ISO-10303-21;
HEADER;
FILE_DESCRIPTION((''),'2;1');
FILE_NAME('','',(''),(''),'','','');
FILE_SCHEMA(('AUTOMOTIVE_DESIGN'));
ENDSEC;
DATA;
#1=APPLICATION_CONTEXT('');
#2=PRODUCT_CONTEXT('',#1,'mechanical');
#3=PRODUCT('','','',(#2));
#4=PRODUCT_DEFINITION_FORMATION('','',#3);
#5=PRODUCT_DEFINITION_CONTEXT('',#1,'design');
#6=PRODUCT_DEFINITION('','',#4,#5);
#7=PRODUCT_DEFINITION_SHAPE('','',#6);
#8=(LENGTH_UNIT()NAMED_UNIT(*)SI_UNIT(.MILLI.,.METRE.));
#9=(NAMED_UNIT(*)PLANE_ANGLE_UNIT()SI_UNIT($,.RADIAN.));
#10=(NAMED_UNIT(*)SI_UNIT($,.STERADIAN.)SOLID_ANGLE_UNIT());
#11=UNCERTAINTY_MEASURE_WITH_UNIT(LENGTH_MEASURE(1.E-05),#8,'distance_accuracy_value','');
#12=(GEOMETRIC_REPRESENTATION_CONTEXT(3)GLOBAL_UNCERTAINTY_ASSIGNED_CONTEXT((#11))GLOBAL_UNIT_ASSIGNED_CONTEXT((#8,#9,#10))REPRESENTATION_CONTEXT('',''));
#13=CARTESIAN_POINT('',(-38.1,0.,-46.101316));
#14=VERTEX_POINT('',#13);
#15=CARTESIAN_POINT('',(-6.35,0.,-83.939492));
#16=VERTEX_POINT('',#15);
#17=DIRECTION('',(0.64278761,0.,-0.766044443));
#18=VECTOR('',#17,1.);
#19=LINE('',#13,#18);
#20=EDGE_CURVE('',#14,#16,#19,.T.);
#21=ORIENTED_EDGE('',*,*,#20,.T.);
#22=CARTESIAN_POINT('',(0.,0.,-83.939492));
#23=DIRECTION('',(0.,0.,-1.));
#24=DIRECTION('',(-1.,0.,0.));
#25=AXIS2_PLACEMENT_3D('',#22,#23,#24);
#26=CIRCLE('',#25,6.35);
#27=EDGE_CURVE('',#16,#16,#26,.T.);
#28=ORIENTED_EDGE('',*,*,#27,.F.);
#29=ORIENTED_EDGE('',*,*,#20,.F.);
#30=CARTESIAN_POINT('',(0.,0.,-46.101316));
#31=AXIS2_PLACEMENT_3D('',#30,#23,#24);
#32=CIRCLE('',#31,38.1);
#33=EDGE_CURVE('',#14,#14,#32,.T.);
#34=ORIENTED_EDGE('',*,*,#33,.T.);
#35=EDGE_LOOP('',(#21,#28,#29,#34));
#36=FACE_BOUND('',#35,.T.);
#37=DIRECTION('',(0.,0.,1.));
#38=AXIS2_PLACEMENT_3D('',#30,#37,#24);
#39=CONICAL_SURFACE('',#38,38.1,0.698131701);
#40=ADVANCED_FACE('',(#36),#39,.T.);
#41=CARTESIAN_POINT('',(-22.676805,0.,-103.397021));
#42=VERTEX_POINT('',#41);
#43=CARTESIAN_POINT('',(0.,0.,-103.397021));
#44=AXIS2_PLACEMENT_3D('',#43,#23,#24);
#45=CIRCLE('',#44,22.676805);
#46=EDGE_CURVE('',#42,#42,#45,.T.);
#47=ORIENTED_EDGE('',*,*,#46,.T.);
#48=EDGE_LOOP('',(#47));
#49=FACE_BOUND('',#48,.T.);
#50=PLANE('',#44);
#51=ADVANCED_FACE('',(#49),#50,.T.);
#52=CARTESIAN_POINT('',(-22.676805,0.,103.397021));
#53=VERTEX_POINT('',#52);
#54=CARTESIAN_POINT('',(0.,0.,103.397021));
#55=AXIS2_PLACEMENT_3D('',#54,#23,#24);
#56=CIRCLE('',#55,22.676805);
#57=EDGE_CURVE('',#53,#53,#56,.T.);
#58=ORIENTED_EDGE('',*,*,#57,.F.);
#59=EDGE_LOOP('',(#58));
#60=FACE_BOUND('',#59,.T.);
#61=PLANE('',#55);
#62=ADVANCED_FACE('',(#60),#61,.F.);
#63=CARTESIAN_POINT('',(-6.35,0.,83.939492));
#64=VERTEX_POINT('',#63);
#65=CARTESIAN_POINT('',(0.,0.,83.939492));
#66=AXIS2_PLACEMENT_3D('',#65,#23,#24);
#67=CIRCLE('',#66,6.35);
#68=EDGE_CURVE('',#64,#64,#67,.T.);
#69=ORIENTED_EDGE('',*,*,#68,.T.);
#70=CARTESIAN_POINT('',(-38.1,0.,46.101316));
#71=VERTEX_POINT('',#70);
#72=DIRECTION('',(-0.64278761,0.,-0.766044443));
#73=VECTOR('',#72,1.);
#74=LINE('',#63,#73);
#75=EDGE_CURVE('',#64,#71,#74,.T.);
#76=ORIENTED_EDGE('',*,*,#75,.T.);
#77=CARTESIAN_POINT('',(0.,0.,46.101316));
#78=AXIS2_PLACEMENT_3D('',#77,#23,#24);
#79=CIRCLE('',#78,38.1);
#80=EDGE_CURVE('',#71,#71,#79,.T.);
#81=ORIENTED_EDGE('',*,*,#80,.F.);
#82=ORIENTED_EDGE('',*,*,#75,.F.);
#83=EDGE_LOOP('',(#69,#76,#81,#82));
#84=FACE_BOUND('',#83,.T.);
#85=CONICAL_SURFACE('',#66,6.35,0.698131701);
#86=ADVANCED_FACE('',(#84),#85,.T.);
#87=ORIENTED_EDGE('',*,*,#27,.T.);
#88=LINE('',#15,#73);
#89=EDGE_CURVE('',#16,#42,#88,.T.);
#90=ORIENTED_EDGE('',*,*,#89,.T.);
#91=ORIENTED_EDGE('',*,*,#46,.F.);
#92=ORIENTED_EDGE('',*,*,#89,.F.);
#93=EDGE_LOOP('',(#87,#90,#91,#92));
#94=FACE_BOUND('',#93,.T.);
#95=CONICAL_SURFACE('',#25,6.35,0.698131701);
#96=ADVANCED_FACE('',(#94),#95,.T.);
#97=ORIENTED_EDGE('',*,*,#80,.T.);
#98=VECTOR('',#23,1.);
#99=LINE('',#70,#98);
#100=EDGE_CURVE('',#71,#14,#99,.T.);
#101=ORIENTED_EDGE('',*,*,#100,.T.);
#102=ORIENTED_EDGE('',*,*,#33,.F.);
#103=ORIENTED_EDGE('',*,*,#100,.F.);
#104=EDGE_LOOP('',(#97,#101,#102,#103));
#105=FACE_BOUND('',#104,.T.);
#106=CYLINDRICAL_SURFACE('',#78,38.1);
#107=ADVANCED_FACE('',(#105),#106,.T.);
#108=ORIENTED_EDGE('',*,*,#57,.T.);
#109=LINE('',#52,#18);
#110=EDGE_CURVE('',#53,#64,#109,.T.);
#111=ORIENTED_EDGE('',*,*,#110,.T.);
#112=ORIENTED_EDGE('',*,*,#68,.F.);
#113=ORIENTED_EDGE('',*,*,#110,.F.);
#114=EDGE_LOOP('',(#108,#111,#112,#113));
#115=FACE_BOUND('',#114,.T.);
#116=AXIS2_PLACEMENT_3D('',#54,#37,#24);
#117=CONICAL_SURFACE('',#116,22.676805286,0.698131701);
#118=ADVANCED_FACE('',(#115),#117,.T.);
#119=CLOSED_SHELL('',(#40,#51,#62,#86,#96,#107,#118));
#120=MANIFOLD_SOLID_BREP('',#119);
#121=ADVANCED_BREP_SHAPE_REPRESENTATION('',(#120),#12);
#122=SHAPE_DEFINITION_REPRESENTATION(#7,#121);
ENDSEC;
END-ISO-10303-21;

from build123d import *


# Not quite as in the source:
# - a feature of the source that left no trace in its solid (it failed there, or was rolled back) is left out


with BuildPart() as f1:
    # F0 (on Front) → F1 (revolve)
    with BuildSketch(Plane.XZ):
        Polygon((-38.1, 46.1013156182), (-38.1, 0), (-38.1, -46.1013156182), (-6.35, -83.9394921831), (0, -91.5071274961), (0, 83.9394921831), (-6.35, 83.9394921831), align=None)
        Polygon((-22.676805286, 103.3970210383), (-6.35, 83.9394921831), (0, 91.5071274961), (0, 103.3970210383), align=None)
        Polygon((0, 91.5071274961), (-6.35, 83.9394921831), (0, 83.9394921831), align=None)
        Polygon((0, -91.5071274961), (-6.35, -83.9394921831), (-22.676805286, -103.3970210383), (0, -103.3970210383), align=None)
    revolve(axis=Axis((0, 0, 0), (0, 0, -1)))


solid = f1.part
